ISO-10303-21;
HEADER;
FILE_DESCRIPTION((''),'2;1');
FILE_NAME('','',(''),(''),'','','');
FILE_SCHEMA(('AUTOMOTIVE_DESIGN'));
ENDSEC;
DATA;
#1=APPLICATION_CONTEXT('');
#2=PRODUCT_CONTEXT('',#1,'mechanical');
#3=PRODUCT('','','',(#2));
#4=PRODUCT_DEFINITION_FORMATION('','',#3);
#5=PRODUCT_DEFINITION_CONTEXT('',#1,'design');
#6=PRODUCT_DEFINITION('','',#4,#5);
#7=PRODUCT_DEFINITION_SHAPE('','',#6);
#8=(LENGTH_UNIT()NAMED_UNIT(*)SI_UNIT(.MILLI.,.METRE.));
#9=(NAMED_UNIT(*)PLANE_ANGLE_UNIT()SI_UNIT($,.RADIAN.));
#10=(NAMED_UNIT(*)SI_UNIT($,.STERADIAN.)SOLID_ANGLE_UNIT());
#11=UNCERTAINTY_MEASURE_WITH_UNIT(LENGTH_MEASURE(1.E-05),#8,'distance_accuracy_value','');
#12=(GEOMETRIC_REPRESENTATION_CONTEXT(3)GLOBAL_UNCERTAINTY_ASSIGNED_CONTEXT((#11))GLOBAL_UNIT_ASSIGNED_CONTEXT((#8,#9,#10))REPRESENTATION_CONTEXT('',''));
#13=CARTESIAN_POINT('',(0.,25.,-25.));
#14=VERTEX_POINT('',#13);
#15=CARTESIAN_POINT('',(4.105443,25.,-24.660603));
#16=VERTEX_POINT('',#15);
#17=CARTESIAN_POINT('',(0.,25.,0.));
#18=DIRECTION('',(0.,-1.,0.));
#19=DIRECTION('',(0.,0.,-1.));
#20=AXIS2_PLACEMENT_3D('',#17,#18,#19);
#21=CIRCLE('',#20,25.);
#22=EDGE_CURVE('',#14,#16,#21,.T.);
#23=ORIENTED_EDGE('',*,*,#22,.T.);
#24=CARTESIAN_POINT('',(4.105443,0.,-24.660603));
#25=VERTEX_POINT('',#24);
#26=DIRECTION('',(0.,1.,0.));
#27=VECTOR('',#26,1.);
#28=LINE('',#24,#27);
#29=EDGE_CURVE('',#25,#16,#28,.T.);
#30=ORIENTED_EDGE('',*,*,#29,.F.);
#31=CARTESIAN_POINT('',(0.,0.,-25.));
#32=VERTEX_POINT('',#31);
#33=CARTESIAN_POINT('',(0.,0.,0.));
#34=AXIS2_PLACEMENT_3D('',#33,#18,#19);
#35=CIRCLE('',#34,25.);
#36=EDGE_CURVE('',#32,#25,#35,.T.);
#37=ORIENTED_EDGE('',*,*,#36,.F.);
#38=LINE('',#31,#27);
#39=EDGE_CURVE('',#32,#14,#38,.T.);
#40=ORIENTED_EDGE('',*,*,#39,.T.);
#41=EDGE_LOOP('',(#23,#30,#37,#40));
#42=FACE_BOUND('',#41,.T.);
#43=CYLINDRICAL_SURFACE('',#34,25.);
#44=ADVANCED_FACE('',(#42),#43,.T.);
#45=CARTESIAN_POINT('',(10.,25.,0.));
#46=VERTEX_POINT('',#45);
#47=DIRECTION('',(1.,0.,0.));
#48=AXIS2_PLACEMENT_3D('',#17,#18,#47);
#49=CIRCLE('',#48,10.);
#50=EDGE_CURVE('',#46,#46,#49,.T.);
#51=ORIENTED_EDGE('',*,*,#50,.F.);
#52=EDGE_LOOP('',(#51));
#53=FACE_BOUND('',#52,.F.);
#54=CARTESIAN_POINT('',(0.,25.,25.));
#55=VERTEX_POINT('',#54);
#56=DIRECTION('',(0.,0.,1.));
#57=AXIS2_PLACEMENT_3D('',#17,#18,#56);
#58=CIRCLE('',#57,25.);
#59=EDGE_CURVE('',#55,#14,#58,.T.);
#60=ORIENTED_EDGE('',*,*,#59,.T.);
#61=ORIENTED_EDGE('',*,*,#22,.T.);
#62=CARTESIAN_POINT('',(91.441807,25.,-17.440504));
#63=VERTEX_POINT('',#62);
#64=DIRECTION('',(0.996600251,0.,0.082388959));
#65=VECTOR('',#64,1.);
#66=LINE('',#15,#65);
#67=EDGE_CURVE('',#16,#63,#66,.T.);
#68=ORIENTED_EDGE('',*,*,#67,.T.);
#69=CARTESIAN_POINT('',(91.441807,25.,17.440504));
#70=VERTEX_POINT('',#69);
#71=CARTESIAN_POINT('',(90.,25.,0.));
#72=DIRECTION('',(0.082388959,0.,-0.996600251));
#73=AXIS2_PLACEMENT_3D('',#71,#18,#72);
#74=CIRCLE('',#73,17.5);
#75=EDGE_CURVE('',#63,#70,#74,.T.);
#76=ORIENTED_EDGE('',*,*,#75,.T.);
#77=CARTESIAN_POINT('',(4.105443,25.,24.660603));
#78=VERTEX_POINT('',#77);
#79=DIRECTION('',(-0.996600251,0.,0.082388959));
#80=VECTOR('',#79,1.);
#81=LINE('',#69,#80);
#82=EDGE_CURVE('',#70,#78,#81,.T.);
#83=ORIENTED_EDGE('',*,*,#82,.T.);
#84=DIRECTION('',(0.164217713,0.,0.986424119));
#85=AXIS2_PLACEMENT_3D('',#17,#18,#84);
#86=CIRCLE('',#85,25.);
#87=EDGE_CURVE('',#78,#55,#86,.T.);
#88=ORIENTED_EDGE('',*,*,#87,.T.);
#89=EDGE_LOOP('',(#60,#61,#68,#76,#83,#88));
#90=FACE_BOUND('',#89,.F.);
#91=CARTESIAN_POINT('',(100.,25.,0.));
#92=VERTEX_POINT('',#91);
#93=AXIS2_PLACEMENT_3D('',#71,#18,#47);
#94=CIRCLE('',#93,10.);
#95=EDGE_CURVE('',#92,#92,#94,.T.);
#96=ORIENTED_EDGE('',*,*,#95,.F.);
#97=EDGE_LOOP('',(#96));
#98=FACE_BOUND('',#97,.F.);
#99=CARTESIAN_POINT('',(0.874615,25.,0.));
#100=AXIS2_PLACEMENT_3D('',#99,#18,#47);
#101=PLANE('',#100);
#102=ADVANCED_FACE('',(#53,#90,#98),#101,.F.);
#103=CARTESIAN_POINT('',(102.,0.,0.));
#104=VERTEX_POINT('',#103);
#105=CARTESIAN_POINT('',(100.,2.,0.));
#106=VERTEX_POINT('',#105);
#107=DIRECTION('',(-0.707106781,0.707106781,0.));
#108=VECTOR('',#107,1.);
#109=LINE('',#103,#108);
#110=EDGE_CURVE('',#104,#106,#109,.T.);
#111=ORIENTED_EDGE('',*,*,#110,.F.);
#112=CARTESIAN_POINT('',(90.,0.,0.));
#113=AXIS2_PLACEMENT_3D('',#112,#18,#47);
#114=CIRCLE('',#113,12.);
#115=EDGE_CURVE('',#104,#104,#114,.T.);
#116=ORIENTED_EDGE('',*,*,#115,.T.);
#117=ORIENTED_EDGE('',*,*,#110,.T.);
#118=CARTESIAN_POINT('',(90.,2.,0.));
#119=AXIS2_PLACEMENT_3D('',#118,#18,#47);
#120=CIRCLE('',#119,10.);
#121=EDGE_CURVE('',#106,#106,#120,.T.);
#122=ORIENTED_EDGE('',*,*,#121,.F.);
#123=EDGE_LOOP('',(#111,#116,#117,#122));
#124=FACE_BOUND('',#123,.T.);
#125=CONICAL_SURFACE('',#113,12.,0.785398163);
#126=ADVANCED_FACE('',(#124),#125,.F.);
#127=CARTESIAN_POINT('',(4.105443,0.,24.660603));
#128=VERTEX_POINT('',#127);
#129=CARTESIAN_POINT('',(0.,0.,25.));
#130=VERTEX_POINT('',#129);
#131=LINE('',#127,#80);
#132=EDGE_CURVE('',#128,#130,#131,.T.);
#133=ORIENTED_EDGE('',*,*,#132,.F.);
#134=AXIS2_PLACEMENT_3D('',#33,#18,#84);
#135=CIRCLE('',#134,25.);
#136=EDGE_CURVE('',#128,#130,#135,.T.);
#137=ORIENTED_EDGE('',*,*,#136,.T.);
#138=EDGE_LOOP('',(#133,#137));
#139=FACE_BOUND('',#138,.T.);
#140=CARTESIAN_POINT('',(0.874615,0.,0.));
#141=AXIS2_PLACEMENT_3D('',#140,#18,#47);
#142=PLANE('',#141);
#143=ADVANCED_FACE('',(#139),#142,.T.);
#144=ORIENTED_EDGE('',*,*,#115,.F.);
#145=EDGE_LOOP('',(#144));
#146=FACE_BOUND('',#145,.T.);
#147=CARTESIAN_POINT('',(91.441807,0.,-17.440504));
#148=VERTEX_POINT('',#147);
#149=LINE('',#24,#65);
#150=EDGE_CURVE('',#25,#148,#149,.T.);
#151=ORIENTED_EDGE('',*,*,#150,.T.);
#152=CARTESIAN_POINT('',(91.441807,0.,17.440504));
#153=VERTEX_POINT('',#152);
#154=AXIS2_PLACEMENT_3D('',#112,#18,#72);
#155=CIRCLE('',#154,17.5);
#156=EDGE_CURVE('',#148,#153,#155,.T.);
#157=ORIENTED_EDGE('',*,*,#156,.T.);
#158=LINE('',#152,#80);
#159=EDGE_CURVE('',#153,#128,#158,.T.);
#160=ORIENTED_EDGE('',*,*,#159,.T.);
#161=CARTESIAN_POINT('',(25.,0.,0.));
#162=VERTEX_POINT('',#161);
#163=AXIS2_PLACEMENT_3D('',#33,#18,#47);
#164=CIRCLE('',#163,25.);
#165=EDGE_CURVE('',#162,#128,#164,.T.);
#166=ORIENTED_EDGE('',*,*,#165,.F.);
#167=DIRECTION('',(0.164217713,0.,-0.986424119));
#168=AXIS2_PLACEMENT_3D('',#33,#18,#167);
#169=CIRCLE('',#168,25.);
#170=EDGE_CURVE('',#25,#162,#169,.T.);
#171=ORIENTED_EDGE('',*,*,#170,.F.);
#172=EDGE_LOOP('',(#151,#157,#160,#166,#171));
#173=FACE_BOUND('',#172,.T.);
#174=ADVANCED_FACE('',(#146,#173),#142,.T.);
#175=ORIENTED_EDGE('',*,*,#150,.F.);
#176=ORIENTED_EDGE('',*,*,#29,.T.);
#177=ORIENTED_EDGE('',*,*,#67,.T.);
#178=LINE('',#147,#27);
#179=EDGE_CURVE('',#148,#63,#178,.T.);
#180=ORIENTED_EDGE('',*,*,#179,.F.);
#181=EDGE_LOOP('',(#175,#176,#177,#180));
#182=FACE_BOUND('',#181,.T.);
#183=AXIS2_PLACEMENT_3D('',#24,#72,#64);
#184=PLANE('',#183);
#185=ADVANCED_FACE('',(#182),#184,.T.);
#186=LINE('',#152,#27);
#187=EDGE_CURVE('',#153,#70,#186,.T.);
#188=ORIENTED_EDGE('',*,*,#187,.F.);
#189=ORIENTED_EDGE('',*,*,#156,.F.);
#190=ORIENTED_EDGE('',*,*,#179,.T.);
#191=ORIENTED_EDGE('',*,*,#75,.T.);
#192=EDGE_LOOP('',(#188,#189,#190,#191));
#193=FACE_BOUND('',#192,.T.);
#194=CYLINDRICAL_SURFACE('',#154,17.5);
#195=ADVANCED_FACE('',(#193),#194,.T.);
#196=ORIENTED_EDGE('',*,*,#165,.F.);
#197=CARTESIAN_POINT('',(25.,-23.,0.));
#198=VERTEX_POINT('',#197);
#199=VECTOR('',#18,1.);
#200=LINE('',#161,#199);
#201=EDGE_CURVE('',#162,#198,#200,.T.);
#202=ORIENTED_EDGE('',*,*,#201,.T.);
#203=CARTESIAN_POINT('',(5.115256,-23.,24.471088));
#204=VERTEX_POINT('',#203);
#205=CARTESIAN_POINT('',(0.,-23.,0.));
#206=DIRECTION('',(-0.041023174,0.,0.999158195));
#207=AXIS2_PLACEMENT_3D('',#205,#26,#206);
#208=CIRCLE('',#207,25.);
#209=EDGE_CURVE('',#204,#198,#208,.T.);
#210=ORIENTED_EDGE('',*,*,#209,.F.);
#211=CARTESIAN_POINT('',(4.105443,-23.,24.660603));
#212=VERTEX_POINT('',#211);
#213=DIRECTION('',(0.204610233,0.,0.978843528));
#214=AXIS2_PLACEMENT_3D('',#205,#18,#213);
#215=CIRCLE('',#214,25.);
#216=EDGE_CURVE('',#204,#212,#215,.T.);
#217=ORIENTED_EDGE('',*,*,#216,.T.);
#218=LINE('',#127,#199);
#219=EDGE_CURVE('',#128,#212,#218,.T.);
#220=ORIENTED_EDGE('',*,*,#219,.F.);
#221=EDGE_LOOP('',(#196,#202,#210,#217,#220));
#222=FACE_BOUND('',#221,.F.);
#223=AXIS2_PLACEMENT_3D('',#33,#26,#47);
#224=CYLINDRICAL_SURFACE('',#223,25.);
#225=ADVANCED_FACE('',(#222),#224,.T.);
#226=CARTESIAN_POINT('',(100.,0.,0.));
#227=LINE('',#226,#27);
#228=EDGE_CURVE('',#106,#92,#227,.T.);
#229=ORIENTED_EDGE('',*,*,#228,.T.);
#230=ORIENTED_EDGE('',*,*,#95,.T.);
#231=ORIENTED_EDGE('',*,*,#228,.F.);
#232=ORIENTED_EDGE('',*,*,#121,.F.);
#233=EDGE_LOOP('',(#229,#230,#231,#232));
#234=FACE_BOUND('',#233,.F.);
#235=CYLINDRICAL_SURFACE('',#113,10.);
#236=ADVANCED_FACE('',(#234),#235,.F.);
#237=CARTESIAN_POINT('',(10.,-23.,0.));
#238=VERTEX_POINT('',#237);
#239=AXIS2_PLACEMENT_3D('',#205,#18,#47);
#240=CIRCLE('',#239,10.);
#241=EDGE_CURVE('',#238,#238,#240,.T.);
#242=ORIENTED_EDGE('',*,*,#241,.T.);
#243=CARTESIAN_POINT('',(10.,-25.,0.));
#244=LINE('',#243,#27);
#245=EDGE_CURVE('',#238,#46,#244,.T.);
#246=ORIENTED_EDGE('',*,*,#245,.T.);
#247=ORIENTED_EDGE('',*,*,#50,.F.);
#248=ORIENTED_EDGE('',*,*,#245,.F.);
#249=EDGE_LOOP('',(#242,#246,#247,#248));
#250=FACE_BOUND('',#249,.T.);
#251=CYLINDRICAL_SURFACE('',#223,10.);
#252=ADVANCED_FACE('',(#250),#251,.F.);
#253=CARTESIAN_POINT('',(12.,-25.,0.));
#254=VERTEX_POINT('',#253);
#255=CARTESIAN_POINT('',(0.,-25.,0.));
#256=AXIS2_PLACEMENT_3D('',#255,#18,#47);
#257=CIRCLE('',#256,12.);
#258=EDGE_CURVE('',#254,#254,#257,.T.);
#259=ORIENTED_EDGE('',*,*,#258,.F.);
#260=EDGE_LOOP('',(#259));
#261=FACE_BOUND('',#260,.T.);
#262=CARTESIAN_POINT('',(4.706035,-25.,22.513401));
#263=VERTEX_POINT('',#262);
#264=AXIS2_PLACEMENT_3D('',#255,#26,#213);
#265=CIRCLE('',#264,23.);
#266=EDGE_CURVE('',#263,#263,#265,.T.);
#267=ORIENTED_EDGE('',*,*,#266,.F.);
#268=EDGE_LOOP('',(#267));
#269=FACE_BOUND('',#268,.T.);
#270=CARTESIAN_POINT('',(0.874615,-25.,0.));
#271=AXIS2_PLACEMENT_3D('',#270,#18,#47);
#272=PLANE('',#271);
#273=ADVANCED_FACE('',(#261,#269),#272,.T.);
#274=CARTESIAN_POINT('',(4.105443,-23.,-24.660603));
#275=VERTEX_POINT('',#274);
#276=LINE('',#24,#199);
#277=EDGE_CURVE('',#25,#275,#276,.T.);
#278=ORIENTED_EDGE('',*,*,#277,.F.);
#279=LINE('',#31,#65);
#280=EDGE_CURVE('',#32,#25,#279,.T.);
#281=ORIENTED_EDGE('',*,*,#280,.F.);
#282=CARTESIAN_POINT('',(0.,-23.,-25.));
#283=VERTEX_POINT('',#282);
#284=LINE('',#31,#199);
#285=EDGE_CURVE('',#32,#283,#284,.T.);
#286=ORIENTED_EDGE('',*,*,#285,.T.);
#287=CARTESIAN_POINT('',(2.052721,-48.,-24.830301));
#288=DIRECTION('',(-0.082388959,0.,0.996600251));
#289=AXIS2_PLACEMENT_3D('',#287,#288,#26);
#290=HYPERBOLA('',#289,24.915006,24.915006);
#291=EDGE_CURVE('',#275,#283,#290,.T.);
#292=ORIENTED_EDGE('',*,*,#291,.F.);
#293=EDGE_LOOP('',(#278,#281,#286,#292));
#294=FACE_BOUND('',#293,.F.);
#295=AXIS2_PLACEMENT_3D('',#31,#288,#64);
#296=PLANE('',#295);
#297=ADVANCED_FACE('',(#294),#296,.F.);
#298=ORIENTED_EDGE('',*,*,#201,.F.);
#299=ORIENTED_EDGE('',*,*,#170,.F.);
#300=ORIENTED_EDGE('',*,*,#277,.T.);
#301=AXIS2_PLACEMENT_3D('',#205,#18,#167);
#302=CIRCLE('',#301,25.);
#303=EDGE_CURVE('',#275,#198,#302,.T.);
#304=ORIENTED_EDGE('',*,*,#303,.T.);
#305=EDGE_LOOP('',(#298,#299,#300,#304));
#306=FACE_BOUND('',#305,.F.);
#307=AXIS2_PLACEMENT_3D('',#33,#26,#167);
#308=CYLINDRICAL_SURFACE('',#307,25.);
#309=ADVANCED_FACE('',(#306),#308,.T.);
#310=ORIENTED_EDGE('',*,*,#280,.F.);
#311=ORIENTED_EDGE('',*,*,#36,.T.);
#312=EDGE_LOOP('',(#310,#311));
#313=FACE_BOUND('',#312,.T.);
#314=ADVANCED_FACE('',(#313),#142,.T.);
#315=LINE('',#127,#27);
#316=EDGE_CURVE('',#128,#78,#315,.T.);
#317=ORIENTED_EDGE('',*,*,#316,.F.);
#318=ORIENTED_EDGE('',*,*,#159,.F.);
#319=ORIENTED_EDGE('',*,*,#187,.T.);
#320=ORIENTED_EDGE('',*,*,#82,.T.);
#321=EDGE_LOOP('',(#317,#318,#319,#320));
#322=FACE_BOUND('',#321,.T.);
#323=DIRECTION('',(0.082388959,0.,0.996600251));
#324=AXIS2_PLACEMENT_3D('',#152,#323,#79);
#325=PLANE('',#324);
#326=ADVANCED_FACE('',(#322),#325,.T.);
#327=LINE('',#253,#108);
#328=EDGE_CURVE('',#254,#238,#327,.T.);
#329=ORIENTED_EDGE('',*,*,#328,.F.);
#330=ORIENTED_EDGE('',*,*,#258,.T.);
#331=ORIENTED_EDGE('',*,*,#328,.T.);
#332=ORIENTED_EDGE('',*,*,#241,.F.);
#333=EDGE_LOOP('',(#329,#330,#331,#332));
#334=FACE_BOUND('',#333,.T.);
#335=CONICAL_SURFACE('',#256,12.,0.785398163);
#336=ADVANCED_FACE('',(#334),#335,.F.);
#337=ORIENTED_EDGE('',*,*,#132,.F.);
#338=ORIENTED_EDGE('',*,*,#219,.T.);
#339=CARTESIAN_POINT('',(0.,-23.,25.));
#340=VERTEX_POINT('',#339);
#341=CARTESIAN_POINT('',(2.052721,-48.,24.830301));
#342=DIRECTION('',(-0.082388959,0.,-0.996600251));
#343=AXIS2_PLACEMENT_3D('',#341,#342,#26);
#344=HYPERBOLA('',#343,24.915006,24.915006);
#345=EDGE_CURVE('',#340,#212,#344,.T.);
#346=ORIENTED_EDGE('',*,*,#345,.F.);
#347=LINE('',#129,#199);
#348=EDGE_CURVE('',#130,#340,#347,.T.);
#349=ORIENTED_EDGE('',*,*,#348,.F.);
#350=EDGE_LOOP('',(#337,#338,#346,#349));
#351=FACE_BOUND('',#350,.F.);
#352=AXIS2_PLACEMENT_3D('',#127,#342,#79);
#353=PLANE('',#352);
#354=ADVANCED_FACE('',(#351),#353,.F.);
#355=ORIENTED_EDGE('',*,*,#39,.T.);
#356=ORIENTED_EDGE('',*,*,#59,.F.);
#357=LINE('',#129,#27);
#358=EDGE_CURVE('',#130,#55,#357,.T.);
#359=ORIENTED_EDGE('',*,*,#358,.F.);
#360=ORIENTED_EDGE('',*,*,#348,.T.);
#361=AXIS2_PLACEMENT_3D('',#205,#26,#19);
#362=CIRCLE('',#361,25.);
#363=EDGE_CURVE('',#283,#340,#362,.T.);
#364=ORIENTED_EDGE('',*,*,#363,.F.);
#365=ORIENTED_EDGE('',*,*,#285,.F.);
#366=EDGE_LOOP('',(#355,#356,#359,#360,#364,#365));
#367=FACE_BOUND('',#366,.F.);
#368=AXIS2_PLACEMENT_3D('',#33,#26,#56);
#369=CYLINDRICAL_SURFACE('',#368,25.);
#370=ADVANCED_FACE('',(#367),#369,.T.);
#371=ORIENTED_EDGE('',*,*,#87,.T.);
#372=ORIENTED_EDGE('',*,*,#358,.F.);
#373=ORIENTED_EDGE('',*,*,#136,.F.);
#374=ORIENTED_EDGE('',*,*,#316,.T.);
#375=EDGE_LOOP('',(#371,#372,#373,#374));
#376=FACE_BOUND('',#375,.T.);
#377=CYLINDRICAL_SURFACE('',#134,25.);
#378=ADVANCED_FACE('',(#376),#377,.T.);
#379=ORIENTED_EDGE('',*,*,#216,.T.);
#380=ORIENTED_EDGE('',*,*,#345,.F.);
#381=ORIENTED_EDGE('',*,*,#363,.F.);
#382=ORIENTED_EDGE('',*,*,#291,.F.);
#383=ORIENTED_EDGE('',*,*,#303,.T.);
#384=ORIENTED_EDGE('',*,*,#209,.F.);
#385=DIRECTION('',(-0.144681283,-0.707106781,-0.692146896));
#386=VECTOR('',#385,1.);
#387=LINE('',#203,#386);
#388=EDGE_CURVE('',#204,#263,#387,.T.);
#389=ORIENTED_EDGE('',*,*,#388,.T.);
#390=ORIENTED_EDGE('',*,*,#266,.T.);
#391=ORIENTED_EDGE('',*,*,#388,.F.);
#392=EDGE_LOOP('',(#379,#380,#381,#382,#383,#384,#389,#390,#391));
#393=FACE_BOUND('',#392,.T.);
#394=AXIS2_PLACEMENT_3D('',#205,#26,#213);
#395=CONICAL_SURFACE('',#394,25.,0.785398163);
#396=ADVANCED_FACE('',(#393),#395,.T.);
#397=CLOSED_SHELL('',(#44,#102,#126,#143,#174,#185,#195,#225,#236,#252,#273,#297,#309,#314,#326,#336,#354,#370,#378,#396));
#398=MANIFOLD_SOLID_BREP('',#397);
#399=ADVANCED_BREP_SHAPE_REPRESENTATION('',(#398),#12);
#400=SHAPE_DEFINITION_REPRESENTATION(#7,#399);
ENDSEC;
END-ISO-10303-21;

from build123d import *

# Parameters (mm, degrees)
F0_R        = 10
F1_DEPTH    = 25
F2_DEPTH    = 25
F3_T2_ANGLE = 203.6133668192
F3_T8_ANGLE = 184.7022290241


# Not quite as in the source:
# - a fillet or chamfer that OpenCascade refuses, or shapes differently, is made with other operations: its cross-section is extruded or revolved along the edge and cut away or added


with BuildPart() as f1:
    # F0 (on Front) → F1 (new body)
    with BuildSketch(Plane.XZ):
        with BuildLine():
            Line((4.1054428346, 24.6606029758), (0, 25))
            ThreePointArc((0, 25), (-25, 0), (0, -25))
            Line((0, -25), (4.1054428346, -24.6606029758))
            ThreePointArc((4.1054428346, -24.6606029758), (19.0740146648, -16.1611251022), (25, 0))
            ThreePointArc((25, 0), (19.0740146648, 16.1611251022), (4.1054428346, 24.6606029758))
        make_face()
        Circle(F0_R, mode=Mode.SUBTRACT)
        with BuildLine():
            ThreePointArc((4.1054428346, 24.6606029758), (2.0597239626, 24.9150062653), (0, 25))
            Line((0, 25), (4.1054428346, 24.6606029758))
        make_face()
        with BuildLine():
            Line((4.1054428346, -24.6606029758), (0, -25))
            ThreePointArc((0, -25), (2.0597239626, -24.9150062653), (4.1054428346, -24.6606029758))
        make_face()
        with BuildLine():
            Line((91.4418067738, 17.4405043857), (4.1054428346, 24.6606029758))
            ThreePointArc((4.1054428346, 24.6606029758), (19.0740146648, 16.1611251022), (25, 0))
            ThreePointArc((25, 0), (19.0740146648, -16.1611251022), (4.1054428346, -24.6606029758))
            Line((4.1054428346, -24.6606029758), (91.4418067738, -17.4405043857))
            ThreePointArc((91.4418067738, -17.4405043857), (72.5, 0), (91.4418067738, 17.4405043857))
        make_face()
        with BuildLine():
            ThreePointArc((107.5, 0), (102.8740362463, 11.8536572723), (91.4418067738, 17.4405043857))
            ThreePointArc((91.4418067738, 17.4405043857), (72.5, 0), (91.4418067738, -17.4405043857))
            ThreePointArc((91.4418067738, -17.4405043857), (102.8740362463, -11.8536572723), (107.5, 0))
        make_face()
        with Locations((90, 0)):
            Circle(F0_R, mode=Mode.SUBTRACT)
    extrude(amount=-F1_DEPTH)

    # F0 (on Front) → F2 (join)
    with BuildSketch(Plane.XZ):
        with BuildLine():
            Line((4.1054428346, 24.6606029758), (0, 25))
            ThreePointArc((0, 25), (-25, 0), (0, -25))
            Line((0, -25), (4.1054428346, -24.6606029758))
            ThreePointArc((4.1054428346, -24.6606029758), (19.0740146648, -16.1611251022), (25, 0))
            ThreePointArc((25, 0), (19.0740146648, 16.1611251022), (4.1054428346, 24.6606029758))
        make_face()
        Circle(F0_R, mode=Mode.SUBTRACT)
    extrude(amount=F2_DEPTH)

    # F3: chamfer of 2 on 4 edges, made by hand

    # F3_s1 → F3_t2 (revolve, cut)
    with BuildSketch(Plane(origin=(0, 0, 0), x_dir=(0, 1, 0), z_dir=(0.9788435281, 0, -0.2046102329))):
        Polygon((-23, 25), (-25, 23), (-25, 25), align=None)
    revolve(axis=Axis((0, -25, 0), (0, -1, 0)), revolution_arc=F3_T2_ANGLE, mode=Mode.SUBTRACT)

    # F3_s3 → F3_t4 (revolve, cut)
    with BuildSketch(Plane.XY):
        Polygon((102, 0), (100, 2), (100, 0), align=None)
    revolve(axis=Axis((90, 0, 0), (0, -1, 0)), mode=Mode.SUBTRACT)

    # F3_s5 → F3_t6 (revolve, cut)
    with BuildSketch(Plane.XY):
        Polygon((12, -25), (10, -23), (10, -25), align=None)
    revolve(axis=Axis((0, -25, 0), (0, -1, 0)), mode=Mode.SUBTRACT)

    # F3_s7 → F3_t8 (revolve, cut)
    with BuildSketch(Plane(origin=(0, 0, 0), x_dir=(0, 1, 0), z_dir=(-0.9991581953, 0, -0.0410231743))):
        Polygon((-23, -25), (-25, -23), (-25, -25), align=None)
    revolve(axis=Axis((0, -25, 0), (0, 1, 0)), revolution_arc=F3_T8_ANGLE, mode=Mode.SUBTRACT)


solid = f1.part
